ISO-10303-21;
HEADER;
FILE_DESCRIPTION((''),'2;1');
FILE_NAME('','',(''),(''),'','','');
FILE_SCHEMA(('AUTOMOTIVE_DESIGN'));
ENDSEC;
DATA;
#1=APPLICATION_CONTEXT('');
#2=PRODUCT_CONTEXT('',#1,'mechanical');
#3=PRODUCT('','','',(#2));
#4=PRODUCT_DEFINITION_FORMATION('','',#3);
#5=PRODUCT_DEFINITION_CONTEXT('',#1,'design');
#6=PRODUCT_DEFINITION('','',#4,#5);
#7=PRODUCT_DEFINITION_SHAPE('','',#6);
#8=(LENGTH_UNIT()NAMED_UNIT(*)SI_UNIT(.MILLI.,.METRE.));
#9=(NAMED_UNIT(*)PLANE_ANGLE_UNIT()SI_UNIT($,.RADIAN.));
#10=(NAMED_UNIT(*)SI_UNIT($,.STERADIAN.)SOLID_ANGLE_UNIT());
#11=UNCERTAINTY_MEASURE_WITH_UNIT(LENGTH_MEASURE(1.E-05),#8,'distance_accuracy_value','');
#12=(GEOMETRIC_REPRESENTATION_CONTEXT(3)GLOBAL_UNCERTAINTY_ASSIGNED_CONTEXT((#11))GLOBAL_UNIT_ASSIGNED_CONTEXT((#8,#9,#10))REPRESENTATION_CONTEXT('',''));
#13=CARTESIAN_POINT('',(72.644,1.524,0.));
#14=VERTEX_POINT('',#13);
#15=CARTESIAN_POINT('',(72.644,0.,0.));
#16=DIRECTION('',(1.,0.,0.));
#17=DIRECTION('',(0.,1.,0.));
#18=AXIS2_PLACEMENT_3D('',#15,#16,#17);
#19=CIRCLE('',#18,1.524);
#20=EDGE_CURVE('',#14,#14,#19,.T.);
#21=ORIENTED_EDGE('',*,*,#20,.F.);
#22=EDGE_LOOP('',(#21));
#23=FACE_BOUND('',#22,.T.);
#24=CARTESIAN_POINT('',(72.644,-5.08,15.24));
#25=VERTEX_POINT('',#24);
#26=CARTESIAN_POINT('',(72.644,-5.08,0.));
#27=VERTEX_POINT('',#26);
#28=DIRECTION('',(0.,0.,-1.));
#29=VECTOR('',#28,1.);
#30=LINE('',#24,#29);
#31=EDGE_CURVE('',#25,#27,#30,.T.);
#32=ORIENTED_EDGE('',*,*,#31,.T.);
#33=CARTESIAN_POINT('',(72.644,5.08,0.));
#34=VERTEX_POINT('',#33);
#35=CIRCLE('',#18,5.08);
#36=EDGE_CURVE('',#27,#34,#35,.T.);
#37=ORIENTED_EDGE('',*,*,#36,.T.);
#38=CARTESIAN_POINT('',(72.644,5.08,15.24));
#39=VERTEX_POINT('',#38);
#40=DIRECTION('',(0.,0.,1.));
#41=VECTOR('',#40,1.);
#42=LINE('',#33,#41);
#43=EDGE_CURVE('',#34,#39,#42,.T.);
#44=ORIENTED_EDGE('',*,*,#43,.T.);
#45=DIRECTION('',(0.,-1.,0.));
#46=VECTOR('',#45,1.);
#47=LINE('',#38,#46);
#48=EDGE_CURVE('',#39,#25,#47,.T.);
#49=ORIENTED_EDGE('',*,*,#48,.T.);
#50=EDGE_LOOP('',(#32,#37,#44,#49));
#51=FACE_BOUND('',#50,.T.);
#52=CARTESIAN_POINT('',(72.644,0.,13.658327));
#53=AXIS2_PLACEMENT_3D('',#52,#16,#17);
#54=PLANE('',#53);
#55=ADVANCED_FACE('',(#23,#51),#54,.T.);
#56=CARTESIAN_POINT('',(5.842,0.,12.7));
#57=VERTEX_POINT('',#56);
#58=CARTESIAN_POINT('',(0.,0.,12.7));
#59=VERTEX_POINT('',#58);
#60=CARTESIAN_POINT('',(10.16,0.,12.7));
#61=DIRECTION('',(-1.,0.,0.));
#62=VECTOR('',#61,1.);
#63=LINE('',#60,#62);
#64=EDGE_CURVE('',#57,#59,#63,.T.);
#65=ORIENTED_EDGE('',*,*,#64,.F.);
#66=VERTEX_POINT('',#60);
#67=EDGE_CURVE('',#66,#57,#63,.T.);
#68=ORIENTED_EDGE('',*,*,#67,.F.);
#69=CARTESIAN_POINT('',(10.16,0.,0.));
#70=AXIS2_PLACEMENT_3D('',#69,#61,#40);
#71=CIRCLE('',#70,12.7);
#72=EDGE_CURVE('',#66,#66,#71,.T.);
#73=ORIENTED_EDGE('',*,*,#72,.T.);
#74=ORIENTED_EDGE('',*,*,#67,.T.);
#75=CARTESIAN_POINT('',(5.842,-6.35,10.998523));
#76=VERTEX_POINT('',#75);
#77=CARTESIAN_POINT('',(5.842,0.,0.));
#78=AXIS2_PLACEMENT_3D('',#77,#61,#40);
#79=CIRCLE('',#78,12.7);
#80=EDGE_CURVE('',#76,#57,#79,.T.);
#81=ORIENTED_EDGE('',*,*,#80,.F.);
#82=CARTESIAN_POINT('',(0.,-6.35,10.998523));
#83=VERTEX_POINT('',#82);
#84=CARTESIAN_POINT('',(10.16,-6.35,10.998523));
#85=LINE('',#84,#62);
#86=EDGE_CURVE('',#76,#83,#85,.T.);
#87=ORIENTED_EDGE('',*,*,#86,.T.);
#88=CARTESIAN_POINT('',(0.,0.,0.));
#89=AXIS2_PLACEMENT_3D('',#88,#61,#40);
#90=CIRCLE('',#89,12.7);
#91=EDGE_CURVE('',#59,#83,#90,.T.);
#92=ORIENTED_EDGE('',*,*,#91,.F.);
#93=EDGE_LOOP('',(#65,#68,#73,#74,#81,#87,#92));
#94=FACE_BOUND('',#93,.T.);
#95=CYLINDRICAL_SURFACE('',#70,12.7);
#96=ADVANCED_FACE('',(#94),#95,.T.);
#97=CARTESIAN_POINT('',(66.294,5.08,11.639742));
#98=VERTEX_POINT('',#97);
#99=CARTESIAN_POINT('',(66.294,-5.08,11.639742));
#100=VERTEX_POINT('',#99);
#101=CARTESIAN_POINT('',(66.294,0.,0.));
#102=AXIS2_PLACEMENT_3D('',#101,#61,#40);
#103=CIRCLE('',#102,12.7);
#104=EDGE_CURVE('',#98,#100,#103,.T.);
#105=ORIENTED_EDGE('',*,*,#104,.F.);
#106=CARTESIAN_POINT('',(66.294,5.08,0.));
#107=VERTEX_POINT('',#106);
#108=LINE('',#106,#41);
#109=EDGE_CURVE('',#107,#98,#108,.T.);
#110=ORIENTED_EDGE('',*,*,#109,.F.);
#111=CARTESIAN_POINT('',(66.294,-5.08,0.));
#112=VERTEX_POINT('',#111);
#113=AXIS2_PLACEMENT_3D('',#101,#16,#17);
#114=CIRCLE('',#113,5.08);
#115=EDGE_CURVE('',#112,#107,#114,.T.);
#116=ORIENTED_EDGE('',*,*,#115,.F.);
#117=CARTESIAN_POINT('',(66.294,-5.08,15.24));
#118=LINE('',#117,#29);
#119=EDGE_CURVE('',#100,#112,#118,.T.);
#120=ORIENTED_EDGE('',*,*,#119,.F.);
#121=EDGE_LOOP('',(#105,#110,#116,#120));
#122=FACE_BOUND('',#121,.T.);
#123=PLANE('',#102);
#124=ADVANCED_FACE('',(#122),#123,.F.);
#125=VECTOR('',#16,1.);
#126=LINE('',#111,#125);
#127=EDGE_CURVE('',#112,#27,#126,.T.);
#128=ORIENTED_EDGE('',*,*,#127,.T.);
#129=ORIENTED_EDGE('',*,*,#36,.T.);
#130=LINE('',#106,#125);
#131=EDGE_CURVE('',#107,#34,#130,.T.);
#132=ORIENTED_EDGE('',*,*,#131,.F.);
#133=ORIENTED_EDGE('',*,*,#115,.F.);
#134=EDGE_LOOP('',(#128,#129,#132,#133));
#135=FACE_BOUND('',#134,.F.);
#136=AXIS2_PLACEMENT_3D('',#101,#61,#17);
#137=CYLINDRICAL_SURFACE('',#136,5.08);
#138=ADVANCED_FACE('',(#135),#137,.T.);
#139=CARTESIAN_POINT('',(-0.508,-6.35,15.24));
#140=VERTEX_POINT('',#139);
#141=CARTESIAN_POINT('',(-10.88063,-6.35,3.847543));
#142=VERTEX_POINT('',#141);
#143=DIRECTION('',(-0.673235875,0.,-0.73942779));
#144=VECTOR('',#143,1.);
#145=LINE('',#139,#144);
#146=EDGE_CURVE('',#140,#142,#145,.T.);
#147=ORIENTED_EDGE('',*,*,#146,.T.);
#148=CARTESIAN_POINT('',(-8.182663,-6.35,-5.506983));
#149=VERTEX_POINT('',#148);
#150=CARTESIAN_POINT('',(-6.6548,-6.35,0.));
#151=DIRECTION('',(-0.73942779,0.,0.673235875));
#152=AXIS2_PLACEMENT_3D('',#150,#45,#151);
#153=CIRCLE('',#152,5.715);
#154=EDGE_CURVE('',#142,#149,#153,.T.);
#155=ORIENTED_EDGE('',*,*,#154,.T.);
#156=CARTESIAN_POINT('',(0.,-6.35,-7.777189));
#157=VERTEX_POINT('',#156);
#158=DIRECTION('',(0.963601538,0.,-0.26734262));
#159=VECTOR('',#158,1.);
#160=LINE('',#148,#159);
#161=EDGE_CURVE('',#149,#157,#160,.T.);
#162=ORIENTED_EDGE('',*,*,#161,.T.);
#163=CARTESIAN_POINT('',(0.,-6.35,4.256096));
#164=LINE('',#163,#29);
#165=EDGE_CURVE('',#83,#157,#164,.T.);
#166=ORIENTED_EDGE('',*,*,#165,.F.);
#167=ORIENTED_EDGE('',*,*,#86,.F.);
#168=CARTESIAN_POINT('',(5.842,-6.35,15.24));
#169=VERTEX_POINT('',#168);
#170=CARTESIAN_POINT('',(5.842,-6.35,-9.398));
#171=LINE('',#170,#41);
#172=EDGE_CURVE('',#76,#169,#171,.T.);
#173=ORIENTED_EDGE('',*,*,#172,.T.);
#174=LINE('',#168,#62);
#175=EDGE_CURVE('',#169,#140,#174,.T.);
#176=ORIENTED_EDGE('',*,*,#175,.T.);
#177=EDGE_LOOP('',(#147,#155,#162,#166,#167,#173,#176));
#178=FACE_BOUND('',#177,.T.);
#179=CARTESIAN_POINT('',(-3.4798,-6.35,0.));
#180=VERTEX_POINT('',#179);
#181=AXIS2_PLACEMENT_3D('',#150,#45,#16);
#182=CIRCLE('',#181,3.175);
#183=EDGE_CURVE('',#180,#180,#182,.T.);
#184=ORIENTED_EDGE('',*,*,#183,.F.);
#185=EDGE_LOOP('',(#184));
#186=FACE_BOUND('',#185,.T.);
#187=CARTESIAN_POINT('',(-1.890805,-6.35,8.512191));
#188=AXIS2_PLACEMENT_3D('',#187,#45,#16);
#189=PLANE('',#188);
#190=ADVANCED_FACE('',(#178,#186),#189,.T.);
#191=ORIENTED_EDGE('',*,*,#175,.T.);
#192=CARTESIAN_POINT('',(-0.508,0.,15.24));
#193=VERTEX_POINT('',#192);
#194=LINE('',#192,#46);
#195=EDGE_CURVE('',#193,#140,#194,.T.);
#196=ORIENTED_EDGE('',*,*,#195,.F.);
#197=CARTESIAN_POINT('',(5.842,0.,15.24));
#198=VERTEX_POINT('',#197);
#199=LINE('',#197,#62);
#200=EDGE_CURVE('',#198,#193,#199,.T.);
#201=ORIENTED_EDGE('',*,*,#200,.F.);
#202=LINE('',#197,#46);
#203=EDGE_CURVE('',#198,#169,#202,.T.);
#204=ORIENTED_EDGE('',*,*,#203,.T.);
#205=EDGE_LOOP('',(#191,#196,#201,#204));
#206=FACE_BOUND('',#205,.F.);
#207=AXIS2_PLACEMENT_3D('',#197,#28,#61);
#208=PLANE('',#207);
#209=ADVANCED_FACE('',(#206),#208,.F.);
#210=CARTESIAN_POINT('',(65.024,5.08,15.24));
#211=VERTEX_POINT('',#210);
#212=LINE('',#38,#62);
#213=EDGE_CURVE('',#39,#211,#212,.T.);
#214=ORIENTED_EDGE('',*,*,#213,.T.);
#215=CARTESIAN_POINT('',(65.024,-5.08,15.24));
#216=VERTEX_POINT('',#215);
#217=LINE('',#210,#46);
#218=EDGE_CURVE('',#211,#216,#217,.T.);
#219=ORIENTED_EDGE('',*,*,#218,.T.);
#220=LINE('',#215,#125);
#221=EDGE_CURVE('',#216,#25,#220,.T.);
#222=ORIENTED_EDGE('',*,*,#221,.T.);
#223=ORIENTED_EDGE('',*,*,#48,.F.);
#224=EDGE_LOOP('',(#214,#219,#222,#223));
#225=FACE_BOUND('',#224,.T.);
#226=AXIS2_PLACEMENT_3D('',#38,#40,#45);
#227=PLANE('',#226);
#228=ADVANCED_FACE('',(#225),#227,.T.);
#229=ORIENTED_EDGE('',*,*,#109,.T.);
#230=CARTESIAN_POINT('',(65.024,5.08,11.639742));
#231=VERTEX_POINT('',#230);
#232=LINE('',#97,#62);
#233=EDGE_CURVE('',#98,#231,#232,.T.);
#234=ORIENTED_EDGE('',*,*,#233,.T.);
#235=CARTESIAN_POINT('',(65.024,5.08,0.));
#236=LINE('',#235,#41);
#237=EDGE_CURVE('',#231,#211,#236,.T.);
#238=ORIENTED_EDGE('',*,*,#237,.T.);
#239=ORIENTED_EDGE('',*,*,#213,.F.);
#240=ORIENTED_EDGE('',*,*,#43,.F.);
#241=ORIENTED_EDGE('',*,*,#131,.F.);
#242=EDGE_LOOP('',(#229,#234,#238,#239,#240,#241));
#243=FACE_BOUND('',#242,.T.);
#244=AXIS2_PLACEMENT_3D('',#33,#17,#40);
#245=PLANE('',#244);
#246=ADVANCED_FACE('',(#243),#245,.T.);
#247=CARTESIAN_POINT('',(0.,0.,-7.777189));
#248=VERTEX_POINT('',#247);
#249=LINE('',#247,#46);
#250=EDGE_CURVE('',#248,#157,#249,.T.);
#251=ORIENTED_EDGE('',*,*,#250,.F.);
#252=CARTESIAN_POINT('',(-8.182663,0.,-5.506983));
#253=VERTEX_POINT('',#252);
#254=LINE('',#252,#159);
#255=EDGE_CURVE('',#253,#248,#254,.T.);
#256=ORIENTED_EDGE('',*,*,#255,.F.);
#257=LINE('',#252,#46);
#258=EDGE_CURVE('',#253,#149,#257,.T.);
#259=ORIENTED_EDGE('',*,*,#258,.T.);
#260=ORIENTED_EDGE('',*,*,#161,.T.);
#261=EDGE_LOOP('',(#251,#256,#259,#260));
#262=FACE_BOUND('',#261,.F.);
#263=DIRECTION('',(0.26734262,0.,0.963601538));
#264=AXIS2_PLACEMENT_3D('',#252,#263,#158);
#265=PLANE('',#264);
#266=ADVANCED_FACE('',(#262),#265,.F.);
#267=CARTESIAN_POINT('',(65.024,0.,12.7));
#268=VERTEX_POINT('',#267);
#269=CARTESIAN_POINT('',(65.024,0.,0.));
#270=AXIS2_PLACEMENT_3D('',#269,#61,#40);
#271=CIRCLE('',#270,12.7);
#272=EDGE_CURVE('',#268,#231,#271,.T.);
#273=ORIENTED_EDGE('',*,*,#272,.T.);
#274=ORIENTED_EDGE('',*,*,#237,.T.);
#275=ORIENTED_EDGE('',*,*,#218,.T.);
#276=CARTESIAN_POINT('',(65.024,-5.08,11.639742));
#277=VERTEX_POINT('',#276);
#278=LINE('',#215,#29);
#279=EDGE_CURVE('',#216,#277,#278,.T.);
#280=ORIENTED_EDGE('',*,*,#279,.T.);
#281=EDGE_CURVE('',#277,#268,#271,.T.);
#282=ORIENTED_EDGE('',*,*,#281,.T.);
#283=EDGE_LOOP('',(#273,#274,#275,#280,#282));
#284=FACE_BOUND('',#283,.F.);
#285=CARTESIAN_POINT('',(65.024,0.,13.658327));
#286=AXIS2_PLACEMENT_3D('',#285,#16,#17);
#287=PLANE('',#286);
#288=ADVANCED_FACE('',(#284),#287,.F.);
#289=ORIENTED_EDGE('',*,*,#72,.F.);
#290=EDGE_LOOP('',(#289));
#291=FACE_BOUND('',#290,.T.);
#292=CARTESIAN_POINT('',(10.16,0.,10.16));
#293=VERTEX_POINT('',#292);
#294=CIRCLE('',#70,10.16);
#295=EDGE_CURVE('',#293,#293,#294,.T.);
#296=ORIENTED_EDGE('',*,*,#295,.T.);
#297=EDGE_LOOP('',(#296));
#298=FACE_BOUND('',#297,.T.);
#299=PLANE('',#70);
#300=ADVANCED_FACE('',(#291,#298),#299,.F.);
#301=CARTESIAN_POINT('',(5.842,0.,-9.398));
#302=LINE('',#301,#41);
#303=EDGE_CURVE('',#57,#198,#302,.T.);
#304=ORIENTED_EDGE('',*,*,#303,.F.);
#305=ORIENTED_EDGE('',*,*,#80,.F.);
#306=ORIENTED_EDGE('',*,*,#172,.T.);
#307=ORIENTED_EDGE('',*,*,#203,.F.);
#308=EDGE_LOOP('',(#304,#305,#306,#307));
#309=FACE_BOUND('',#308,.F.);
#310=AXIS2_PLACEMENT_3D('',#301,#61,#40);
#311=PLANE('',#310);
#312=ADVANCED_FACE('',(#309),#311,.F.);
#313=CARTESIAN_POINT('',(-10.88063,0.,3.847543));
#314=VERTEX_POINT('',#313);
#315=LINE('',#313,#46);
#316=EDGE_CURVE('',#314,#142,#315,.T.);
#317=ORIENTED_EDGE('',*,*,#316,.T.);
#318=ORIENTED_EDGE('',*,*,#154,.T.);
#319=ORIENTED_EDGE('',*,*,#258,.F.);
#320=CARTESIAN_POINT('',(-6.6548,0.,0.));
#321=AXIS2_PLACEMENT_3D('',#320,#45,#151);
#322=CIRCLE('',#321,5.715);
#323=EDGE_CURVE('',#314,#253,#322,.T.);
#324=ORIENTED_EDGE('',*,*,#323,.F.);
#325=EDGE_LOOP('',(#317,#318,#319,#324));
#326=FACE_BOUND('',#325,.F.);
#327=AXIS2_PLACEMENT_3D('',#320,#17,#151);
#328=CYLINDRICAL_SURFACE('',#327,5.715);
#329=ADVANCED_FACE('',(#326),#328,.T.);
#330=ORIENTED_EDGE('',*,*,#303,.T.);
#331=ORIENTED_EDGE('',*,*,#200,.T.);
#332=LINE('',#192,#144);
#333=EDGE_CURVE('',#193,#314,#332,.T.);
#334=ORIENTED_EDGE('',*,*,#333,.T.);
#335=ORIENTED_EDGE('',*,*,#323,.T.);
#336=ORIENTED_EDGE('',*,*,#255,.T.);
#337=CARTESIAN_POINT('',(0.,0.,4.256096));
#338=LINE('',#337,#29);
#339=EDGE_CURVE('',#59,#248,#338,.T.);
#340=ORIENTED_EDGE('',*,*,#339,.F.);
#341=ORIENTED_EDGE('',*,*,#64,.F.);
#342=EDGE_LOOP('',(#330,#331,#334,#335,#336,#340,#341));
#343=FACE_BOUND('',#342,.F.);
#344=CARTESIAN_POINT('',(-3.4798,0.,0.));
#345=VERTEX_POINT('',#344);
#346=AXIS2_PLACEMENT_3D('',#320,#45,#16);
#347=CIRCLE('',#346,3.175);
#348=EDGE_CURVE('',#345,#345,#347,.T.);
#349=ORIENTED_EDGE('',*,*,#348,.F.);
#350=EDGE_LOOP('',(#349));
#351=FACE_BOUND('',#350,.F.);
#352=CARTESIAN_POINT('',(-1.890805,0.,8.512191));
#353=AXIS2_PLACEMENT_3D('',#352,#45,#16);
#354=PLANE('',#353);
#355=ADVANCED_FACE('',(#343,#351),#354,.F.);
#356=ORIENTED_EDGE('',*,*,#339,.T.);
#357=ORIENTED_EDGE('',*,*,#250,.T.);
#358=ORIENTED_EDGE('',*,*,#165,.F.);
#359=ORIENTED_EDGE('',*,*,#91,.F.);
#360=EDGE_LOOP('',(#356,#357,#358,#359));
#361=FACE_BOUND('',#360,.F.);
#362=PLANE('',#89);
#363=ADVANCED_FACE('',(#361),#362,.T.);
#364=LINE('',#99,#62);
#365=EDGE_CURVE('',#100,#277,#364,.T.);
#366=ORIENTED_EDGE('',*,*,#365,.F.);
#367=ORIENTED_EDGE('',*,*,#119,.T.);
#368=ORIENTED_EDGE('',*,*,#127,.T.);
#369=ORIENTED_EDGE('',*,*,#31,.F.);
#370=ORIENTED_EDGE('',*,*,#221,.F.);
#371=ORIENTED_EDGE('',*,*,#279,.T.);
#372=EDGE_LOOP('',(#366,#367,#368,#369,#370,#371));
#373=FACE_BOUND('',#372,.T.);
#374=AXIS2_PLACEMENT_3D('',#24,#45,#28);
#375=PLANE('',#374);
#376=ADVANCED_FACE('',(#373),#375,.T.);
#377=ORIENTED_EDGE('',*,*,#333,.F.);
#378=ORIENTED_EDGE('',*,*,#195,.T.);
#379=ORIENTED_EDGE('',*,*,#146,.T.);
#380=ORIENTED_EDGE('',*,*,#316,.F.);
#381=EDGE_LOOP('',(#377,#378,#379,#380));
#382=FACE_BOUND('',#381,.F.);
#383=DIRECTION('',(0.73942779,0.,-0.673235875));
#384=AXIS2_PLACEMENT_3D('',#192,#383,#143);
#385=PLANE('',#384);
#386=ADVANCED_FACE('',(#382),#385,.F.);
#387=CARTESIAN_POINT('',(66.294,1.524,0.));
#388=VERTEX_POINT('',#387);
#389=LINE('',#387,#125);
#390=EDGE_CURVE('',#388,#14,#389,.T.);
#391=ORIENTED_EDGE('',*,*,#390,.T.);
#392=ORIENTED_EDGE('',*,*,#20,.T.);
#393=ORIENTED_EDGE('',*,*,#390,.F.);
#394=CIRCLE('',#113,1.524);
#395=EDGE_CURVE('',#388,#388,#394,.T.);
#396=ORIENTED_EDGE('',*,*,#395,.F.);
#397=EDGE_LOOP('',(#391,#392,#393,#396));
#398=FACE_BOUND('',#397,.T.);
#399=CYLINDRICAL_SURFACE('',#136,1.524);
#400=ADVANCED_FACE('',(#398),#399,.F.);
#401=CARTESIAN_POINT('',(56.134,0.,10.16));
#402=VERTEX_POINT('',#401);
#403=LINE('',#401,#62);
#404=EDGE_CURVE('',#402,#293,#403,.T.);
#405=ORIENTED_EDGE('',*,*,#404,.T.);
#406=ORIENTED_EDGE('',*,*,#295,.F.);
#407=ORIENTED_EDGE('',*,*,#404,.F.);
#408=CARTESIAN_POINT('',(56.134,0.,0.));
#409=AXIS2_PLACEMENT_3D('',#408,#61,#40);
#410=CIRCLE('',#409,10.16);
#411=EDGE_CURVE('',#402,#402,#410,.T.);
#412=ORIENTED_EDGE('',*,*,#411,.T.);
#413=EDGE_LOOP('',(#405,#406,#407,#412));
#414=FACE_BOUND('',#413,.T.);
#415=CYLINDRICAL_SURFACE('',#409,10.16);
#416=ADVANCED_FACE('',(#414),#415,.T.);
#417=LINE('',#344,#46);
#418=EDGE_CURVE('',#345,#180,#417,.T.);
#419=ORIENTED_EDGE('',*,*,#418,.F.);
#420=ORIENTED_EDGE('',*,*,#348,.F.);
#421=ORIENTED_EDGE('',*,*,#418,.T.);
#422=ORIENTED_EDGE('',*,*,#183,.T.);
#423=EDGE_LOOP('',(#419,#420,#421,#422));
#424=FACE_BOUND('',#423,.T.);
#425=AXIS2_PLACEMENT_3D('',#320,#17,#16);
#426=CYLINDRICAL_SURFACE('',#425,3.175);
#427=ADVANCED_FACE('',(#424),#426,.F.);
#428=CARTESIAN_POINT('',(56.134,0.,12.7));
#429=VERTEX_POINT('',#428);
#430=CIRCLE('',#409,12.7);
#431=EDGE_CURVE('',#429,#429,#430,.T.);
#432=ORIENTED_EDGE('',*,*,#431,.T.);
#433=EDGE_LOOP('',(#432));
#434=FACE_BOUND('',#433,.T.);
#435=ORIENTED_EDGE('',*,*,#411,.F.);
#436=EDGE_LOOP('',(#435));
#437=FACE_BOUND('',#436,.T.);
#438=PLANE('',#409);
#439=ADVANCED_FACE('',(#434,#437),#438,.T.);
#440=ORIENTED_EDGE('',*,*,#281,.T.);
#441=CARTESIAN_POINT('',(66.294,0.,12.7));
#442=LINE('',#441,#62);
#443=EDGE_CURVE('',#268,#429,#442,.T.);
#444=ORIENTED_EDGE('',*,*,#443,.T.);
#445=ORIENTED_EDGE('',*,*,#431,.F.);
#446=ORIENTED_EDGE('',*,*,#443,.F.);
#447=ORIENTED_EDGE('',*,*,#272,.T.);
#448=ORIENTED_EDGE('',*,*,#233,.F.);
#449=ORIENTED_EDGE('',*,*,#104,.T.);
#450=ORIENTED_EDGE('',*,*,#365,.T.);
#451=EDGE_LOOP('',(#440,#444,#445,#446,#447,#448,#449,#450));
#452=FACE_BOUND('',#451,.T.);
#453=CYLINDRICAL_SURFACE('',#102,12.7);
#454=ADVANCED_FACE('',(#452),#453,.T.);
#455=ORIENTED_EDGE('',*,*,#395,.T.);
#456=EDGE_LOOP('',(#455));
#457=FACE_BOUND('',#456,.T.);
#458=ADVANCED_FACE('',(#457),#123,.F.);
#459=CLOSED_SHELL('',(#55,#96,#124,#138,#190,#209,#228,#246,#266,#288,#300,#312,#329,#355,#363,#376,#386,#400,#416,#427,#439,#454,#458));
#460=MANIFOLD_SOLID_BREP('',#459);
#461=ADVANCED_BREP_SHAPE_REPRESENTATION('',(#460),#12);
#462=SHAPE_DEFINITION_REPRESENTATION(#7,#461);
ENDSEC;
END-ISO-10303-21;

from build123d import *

# Parameters (mm, degrees)
F0_W     = 5.842
F0_H     = 12.7
F0_R     = 3.175
F2_DEPTH = 6.35
F3_R     = 1.524
F4_DEPTH = 6.35
F5_DEPTH = 7.62


with BuildPart() as f1:
    # F0 (on Front) → F1 (revolve)
    with BuildSketch(Plane.XZ):
        Polygon((5.842, 12.7), (5.842, 0), (66.294, 0), (66.294, 12.7), (56.134, 12.7), (56.134, 10.16), (10.16, 10.16), (10.16, 12.7), align=None)
        with Locations((2.921, 6.35)):
            Rectangle(F0_W, F0_H)
    revolve(axis=Axis((33.147, 0, 0), (-1, 0, 0)))

    # F0 (on Front) → F2 (join)
    with BuildSketch(Plane.XZ):
        with BuildLine():
            Line((-0.9398, 0), (0, 0))
            Line((0, 0), (0, 12.7))
            Line((0, 12.7), (5.842, 12.7))
            Line((5.842, 12.7), (5.842, 15.24))
            Line((5.842, 15.24), (-0.508, 15.24))
            Line((-0.508, 15.24), (-10.8806298187, 3.8475430269))
            ThreePointArc((-10.8806298187, 3.8475430269), (-4.5919612295, 5.3297205562), (-0.9398, 0))
        make_face()
        with BuildLine():
            Line((5.842, 0), (0, 0))
            Line((0, 0), (-0.9398, 0))
            ThreePointArc((-0.9398, 0), (-3.1957909266, -4.5493385486), (-8.1826630726, -5.5069827884))
            Line((-8.1826630726, -5.5069827884), (5.842, -9.398))
            Line((5.842, -9.398), (5.842, 0))
        make_face()
        with Locations((2.921, 6.35)):
            Rectangle(F0_W, F0_H)
        with BuildLine():
            ThreePointArc((-8.1826630726, -5.5069827884), (-3.1957909266, -4.5493385486), (-0.9398, 0))
            ThreePointArc((-0.9398, 0), (-4.5919612295, 5.3297205562), (-10.8806298187, 3.8475430269))
            ThreePointArc((-10.8806298187, 3.8475430269), (-12.1459778134, -1.5837270034), (-8.1826630726, -5.5069827884))
        make_face()
        with Locations((-6.6548, 0)):
            Circle(F0_R, mode=Mode.SUBTRACT)
    extrude(amount=F2_DEPTH)

    # F3 (on face) → F4 (join)
    with BuildSketch(Plane.YZ.offset(66.294)):
        with BuildLine():
            ThreePointArc((-5.08, 11.6397422652), (0, 12.7), (5.08, 11.6397422652))
            Line((5.08, 11.6397422652), (5.08, 15.24))
            Line((5.08, 15.24), (-5.08, 15.24))
            Line((-5.08, 15.24), (-5.08, 11.6397422652))
        make_face()
        with BuildLine():
            ThreePointArc((-5.08, 0), (0, 5.08), (5.08, 0))
            Line((5.08, 0), (5.08, 11.6397422652))
            ThreePointArc((5.08, 11.6397422652), (0, 12.7), (-5.08, 11.6397422652))
            Line((-5.08, 11.6397422652), (-5.08, 0))
        make_face()
        with BuildLine():
            ThreePointArc((-5.08, 0), (0, -5.08), (5.08, 0))
            ThreePointArc((5.08, 0), (0, 5.08), (-5.08, 0))
        make_face()
        Circle(F3_R, mode=Mode.SUBTRACT)
    extrude(amount=F4_DEPTH)

    # F5 (add): a face of the model
    f5_faces = [f1.faces().sort_by_distance(p)[0] for p in [
        (72.644, 0, 5.8085929676),
    ]]
    extrude(f5_faces, amount=-F5_DEPTH)


solid = f1.part
